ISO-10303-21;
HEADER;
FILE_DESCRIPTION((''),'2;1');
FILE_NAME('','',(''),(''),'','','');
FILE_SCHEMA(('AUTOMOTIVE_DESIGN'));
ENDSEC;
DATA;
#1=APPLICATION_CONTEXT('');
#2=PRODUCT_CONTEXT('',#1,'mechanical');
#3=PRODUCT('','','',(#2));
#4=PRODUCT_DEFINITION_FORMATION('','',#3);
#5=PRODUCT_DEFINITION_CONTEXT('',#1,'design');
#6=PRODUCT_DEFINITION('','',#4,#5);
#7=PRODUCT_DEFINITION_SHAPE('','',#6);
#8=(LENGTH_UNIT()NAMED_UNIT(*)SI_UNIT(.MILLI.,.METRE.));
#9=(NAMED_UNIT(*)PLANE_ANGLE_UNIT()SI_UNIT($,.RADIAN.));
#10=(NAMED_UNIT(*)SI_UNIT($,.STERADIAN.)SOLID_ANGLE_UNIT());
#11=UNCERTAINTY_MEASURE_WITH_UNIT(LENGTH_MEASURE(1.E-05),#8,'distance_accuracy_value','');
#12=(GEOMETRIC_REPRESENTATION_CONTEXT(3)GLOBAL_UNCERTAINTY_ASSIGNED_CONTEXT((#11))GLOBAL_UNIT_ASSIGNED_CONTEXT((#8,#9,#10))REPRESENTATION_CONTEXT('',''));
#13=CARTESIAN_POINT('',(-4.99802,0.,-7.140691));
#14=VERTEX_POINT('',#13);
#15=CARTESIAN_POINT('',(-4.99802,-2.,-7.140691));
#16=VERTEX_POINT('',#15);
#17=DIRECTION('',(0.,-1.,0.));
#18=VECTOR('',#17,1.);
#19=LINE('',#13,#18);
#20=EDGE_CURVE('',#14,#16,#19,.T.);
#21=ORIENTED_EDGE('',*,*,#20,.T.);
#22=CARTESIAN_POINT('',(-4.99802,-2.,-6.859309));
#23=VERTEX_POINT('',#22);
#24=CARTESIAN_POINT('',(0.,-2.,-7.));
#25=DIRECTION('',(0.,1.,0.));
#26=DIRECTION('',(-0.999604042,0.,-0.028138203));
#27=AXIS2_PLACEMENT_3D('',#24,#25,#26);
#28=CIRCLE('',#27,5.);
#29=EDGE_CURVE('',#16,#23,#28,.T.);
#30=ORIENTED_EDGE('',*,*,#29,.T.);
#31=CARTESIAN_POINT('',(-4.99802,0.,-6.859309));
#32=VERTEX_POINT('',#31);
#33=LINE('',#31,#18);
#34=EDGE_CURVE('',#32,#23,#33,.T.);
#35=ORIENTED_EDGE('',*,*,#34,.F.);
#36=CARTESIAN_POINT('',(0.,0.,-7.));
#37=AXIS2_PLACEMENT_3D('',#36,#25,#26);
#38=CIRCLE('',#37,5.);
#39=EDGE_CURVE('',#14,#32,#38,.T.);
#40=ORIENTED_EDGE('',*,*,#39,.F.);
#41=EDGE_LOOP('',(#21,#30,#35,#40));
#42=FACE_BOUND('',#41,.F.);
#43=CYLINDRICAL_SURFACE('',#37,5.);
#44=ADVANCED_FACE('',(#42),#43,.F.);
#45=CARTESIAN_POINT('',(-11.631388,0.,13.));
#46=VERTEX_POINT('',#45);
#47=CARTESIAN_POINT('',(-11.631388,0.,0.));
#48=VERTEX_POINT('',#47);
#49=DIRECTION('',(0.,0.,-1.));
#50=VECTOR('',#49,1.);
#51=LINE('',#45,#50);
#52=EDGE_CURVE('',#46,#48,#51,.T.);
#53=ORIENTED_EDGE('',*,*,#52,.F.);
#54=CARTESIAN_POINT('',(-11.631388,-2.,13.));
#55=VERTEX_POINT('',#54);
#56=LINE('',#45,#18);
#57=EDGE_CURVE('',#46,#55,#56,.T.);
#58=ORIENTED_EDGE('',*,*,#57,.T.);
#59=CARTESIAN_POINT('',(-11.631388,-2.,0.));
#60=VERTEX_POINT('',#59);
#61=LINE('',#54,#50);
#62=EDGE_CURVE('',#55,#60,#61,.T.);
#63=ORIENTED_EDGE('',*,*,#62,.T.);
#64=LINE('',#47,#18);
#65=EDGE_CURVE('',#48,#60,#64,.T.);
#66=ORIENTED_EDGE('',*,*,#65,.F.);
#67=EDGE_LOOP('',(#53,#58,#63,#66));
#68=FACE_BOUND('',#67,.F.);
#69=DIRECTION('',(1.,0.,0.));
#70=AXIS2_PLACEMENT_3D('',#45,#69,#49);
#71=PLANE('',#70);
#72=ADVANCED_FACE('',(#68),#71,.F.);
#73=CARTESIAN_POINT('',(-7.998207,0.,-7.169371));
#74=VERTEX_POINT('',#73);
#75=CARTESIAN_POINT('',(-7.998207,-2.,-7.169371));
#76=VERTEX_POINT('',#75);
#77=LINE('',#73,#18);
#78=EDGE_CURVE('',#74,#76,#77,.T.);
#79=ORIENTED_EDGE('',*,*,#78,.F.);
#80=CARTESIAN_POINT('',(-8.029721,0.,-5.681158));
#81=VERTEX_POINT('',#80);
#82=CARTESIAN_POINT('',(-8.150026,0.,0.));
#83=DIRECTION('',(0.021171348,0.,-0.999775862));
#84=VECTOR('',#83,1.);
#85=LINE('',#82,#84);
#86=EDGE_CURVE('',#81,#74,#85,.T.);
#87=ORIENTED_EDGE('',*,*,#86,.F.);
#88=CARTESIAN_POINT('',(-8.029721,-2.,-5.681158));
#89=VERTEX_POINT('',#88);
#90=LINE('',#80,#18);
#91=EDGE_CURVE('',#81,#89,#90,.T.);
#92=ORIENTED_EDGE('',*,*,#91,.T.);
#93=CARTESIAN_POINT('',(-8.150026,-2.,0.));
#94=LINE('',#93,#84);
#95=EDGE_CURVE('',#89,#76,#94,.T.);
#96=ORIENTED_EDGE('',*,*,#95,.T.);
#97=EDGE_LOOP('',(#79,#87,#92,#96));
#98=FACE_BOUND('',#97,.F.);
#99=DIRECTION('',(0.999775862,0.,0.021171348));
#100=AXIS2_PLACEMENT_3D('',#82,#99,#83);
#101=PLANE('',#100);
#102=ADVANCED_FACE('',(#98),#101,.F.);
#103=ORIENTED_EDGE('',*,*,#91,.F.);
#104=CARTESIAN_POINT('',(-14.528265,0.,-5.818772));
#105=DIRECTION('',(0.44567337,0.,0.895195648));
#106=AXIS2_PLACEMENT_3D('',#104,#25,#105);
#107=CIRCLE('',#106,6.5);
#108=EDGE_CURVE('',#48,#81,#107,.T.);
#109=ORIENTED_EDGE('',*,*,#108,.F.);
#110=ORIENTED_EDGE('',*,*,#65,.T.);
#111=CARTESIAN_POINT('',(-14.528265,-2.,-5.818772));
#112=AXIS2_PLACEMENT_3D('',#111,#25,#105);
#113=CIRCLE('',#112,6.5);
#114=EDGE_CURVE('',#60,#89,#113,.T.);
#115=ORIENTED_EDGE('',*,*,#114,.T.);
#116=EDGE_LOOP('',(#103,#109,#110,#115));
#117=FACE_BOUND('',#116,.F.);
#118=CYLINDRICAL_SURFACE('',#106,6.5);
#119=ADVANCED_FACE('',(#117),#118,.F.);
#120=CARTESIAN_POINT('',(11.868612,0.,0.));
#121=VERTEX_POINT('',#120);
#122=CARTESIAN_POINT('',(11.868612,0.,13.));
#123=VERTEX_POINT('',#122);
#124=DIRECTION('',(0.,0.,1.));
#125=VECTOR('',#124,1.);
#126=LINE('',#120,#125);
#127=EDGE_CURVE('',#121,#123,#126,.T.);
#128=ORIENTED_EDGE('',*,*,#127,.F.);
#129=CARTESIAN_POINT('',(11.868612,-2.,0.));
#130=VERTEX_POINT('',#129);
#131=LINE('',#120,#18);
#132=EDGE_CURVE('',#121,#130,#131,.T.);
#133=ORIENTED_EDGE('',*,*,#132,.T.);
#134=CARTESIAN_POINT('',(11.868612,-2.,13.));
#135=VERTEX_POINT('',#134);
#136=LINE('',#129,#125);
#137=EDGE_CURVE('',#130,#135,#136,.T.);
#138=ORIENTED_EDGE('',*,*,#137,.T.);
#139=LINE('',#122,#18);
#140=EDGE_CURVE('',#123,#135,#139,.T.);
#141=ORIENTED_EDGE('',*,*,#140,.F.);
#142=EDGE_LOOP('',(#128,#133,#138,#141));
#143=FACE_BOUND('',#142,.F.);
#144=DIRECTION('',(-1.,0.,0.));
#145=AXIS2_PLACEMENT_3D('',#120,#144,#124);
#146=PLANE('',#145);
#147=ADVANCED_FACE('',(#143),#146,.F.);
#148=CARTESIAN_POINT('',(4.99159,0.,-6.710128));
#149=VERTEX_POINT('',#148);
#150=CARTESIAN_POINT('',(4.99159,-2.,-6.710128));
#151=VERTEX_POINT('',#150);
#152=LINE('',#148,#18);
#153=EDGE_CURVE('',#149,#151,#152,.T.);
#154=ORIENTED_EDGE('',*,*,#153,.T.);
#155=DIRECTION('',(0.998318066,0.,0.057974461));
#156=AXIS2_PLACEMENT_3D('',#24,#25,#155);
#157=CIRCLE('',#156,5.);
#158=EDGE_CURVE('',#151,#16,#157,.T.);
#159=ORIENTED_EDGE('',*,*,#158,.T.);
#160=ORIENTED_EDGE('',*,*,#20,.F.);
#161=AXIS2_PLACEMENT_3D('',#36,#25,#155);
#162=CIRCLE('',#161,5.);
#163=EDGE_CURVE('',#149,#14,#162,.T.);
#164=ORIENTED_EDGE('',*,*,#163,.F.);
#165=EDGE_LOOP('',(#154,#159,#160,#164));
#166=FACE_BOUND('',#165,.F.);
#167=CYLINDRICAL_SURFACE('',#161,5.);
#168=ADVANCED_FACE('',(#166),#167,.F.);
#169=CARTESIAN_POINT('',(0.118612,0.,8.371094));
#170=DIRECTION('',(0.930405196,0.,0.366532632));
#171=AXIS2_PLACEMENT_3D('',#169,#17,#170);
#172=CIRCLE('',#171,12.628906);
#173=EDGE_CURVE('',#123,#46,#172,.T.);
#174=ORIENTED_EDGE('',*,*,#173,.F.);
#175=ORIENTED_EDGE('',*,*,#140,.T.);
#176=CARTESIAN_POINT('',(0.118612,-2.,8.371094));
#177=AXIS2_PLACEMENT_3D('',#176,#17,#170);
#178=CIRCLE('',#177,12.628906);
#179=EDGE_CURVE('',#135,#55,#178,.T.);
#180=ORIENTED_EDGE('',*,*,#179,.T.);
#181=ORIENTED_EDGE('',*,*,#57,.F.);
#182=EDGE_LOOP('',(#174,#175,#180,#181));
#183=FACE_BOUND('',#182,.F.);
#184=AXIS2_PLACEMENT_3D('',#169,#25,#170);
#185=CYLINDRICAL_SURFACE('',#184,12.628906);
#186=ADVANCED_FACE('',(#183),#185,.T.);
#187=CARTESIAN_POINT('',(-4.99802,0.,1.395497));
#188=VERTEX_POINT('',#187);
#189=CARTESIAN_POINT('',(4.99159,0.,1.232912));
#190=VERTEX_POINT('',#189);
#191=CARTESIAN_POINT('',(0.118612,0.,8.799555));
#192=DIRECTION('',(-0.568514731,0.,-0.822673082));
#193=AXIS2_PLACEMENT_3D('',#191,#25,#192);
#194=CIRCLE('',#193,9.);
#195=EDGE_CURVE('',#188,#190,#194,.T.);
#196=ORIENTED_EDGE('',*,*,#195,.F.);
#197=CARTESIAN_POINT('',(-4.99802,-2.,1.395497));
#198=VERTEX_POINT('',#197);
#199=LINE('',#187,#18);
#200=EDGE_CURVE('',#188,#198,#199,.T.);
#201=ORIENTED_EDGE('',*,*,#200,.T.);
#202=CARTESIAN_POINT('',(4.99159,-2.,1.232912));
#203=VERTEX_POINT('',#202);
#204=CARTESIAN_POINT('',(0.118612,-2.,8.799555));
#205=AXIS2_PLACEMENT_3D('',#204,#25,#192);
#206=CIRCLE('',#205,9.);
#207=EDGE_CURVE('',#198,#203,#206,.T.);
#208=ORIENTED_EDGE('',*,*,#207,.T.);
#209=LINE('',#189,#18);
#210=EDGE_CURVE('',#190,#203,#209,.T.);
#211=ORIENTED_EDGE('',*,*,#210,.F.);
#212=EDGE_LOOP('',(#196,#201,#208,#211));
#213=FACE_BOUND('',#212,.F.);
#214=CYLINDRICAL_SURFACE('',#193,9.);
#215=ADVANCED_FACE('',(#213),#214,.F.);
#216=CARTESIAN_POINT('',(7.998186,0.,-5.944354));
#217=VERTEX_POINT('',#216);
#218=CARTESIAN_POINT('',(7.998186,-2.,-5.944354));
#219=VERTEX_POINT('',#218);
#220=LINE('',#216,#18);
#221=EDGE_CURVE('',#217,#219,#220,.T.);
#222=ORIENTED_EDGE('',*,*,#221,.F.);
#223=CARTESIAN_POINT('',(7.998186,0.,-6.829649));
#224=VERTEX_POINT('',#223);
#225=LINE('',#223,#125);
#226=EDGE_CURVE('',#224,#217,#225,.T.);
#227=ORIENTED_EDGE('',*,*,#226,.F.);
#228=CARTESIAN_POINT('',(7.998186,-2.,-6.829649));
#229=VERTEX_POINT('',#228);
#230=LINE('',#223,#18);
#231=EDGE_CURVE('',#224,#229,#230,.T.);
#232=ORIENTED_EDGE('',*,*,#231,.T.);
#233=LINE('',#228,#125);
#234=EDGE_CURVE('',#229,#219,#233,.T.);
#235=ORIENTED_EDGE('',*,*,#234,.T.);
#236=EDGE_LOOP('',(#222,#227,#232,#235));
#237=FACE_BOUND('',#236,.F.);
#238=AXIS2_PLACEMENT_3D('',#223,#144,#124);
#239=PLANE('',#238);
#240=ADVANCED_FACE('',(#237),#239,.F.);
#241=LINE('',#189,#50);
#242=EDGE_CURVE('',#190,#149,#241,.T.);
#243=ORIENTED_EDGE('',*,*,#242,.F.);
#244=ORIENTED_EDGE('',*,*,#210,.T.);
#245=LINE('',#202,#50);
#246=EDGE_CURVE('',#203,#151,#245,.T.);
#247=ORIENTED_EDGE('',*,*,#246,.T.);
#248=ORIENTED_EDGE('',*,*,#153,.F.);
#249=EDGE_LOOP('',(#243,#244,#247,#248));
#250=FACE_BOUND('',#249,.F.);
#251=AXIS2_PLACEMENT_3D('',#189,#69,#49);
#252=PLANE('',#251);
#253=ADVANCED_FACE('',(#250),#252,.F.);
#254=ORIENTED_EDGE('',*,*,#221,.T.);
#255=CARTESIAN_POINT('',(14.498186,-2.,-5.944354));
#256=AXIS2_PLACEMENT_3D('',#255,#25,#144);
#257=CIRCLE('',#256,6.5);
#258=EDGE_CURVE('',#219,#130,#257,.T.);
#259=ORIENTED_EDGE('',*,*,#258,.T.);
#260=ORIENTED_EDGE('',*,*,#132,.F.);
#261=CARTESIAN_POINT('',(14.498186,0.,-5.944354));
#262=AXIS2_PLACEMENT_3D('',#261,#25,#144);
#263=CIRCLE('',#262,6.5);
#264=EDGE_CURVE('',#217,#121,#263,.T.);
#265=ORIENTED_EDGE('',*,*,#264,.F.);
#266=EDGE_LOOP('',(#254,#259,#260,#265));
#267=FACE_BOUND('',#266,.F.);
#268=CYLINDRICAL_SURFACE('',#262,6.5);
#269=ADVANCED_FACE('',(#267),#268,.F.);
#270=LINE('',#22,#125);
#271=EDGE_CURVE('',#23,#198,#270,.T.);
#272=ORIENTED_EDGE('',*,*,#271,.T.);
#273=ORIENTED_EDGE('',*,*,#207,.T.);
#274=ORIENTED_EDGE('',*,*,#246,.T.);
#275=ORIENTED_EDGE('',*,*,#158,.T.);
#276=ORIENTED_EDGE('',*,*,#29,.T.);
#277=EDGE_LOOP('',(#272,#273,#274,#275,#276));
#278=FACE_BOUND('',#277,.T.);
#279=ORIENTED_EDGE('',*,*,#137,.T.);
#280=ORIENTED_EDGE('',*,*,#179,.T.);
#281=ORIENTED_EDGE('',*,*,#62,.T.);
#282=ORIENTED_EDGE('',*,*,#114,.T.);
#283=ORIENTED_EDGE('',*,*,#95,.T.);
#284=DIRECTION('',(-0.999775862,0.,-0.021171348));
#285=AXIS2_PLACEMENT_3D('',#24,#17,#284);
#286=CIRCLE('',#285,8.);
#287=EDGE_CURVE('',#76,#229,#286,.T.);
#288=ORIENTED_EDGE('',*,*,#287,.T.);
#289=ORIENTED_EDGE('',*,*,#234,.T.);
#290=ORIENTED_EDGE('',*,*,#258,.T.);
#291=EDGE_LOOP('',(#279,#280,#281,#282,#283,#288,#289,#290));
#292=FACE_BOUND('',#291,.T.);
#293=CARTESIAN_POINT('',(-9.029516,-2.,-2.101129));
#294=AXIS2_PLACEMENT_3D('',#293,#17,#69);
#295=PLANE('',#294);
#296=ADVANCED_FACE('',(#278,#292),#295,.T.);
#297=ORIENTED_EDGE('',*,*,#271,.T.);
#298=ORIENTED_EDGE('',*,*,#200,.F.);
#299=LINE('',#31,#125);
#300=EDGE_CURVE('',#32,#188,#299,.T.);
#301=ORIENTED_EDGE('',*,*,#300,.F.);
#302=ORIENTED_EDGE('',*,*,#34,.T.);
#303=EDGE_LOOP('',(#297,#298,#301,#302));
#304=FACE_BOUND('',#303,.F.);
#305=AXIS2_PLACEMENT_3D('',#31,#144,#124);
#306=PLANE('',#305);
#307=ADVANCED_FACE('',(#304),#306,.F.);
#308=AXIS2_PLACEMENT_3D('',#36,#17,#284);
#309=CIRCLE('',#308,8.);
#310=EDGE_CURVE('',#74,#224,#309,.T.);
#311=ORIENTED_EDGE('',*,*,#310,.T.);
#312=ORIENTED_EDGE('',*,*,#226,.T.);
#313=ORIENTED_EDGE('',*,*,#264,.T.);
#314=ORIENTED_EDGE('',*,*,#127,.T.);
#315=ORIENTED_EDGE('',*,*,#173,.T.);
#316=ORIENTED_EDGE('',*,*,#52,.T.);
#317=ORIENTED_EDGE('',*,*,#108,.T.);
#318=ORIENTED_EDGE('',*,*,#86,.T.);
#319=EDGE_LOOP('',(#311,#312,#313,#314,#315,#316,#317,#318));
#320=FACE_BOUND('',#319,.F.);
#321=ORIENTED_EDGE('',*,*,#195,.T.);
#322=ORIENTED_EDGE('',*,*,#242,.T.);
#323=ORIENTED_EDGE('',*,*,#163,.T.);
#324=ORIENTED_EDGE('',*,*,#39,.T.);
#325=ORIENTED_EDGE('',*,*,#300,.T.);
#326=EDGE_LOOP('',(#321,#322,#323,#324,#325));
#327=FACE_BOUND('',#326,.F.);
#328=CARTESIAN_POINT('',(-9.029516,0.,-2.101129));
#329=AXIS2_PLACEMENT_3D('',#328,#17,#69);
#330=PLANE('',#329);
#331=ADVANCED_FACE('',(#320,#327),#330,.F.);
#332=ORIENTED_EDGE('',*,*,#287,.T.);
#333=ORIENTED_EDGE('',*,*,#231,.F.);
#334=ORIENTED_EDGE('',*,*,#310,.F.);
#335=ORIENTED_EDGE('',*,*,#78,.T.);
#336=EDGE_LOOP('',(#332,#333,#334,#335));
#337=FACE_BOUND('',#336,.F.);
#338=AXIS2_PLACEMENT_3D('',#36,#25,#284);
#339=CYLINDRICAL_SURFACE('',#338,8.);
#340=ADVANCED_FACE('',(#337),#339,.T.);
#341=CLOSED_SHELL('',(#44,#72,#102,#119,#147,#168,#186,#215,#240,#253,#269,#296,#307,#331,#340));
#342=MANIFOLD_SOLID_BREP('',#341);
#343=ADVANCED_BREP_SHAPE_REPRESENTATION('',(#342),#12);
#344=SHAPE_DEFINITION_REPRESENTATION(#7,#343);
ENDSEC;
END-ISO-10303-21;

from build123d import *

# Parameters (mm, degrees)
F1_DEPTH    = 2
F2_T1_DEPTH = 2


# Not quite as in the source:
# - a fillet or chamfer that OpenCascade refuses, or shapes differently, is made with other operations: its cross-section is extruded or revolved along the edge and cut away or added


with BuildPart() as f1:
    # F0 (on Front) → F1 (new body)
    with BuildSketch(Plane.XZ):
        with BuildLine():
            Line((-11.6313876303, 13), (-11.6313876303, 0))
            Line((-11.6313876303, 0), (-8.150026169, 0))
            Line((-8.150026169, 0), (-7.9982068951, -7.1693707857))
            ThreePointArc((-7.9982068951, -7.1693707857), (0.1698610087, -14.9981964991), (7.998186073, -6.829648769))
            Line((7.998186073, -6.829648769), (7.998186073, 0))
            Line((7.998186073, 0), (11.8686123697, 0))
            Line((11.8686123697, 0), (11.8686123697, 13))
            ThreePointArc((11.8686123697, 13), (0.1186123697, 21), (-11.6313876303, 13))
        make_face()
        with BuildLine():
            ThreePointArc((-4.9980202119, -7.1406910146), (-5, -7), (-4.9980202119, -6.8593089854))
            Line((-4.9980202119, -6.8593089854), (-4.9980202119, 1.395497035))
            ThreePointArc((-4.9980202119, 1.395497035), (0.2650718597, 17.7983630087), (4.9915903324, 1.2329118096))
            Line((4.9915903324, 1.2329118096), (4.9915903324, -6.7101276944))
            ThreePointArc((4.9915903324, -6.7101276944), (0.2153056642, -11.9953621962), (-4.9980202119, -7.1406910146))
        make_face(mode=Mode.SUBTRACT)
    extrude(amount=F1_DEPTH)

    # F2: fillet of radius 6.5 on 2 edges, made by hand

    # F2_s2 → F2_t1 (join)
    with BuildSketch(Plane.XZ):
        with BuildLine():
            ThreePointArc((-11.6313876303, 0), (-9.0385133393, -2.3384510594), (-8.029721431, -5.6811579463))
            Line((-8.029721431, -5.6811579463), (-8.150026169, 0))
            Line((-8.150026169, 0), (-11.6313876303, 0))
        make_face()
        with BuildLine():
            ThreePointArc((7.998186073, -5.9443538033), (9.0510662344, -2.3976813538), (11.8686123697, 0))
            Line((11.8686123697, 0), (7.998186073, 0))
            Line((7.998186073, 0), (7.998186073, -5.9443538033))
        make_face()
    extrude(amount=F2_T1_DEPTH)


solid = f1.part
